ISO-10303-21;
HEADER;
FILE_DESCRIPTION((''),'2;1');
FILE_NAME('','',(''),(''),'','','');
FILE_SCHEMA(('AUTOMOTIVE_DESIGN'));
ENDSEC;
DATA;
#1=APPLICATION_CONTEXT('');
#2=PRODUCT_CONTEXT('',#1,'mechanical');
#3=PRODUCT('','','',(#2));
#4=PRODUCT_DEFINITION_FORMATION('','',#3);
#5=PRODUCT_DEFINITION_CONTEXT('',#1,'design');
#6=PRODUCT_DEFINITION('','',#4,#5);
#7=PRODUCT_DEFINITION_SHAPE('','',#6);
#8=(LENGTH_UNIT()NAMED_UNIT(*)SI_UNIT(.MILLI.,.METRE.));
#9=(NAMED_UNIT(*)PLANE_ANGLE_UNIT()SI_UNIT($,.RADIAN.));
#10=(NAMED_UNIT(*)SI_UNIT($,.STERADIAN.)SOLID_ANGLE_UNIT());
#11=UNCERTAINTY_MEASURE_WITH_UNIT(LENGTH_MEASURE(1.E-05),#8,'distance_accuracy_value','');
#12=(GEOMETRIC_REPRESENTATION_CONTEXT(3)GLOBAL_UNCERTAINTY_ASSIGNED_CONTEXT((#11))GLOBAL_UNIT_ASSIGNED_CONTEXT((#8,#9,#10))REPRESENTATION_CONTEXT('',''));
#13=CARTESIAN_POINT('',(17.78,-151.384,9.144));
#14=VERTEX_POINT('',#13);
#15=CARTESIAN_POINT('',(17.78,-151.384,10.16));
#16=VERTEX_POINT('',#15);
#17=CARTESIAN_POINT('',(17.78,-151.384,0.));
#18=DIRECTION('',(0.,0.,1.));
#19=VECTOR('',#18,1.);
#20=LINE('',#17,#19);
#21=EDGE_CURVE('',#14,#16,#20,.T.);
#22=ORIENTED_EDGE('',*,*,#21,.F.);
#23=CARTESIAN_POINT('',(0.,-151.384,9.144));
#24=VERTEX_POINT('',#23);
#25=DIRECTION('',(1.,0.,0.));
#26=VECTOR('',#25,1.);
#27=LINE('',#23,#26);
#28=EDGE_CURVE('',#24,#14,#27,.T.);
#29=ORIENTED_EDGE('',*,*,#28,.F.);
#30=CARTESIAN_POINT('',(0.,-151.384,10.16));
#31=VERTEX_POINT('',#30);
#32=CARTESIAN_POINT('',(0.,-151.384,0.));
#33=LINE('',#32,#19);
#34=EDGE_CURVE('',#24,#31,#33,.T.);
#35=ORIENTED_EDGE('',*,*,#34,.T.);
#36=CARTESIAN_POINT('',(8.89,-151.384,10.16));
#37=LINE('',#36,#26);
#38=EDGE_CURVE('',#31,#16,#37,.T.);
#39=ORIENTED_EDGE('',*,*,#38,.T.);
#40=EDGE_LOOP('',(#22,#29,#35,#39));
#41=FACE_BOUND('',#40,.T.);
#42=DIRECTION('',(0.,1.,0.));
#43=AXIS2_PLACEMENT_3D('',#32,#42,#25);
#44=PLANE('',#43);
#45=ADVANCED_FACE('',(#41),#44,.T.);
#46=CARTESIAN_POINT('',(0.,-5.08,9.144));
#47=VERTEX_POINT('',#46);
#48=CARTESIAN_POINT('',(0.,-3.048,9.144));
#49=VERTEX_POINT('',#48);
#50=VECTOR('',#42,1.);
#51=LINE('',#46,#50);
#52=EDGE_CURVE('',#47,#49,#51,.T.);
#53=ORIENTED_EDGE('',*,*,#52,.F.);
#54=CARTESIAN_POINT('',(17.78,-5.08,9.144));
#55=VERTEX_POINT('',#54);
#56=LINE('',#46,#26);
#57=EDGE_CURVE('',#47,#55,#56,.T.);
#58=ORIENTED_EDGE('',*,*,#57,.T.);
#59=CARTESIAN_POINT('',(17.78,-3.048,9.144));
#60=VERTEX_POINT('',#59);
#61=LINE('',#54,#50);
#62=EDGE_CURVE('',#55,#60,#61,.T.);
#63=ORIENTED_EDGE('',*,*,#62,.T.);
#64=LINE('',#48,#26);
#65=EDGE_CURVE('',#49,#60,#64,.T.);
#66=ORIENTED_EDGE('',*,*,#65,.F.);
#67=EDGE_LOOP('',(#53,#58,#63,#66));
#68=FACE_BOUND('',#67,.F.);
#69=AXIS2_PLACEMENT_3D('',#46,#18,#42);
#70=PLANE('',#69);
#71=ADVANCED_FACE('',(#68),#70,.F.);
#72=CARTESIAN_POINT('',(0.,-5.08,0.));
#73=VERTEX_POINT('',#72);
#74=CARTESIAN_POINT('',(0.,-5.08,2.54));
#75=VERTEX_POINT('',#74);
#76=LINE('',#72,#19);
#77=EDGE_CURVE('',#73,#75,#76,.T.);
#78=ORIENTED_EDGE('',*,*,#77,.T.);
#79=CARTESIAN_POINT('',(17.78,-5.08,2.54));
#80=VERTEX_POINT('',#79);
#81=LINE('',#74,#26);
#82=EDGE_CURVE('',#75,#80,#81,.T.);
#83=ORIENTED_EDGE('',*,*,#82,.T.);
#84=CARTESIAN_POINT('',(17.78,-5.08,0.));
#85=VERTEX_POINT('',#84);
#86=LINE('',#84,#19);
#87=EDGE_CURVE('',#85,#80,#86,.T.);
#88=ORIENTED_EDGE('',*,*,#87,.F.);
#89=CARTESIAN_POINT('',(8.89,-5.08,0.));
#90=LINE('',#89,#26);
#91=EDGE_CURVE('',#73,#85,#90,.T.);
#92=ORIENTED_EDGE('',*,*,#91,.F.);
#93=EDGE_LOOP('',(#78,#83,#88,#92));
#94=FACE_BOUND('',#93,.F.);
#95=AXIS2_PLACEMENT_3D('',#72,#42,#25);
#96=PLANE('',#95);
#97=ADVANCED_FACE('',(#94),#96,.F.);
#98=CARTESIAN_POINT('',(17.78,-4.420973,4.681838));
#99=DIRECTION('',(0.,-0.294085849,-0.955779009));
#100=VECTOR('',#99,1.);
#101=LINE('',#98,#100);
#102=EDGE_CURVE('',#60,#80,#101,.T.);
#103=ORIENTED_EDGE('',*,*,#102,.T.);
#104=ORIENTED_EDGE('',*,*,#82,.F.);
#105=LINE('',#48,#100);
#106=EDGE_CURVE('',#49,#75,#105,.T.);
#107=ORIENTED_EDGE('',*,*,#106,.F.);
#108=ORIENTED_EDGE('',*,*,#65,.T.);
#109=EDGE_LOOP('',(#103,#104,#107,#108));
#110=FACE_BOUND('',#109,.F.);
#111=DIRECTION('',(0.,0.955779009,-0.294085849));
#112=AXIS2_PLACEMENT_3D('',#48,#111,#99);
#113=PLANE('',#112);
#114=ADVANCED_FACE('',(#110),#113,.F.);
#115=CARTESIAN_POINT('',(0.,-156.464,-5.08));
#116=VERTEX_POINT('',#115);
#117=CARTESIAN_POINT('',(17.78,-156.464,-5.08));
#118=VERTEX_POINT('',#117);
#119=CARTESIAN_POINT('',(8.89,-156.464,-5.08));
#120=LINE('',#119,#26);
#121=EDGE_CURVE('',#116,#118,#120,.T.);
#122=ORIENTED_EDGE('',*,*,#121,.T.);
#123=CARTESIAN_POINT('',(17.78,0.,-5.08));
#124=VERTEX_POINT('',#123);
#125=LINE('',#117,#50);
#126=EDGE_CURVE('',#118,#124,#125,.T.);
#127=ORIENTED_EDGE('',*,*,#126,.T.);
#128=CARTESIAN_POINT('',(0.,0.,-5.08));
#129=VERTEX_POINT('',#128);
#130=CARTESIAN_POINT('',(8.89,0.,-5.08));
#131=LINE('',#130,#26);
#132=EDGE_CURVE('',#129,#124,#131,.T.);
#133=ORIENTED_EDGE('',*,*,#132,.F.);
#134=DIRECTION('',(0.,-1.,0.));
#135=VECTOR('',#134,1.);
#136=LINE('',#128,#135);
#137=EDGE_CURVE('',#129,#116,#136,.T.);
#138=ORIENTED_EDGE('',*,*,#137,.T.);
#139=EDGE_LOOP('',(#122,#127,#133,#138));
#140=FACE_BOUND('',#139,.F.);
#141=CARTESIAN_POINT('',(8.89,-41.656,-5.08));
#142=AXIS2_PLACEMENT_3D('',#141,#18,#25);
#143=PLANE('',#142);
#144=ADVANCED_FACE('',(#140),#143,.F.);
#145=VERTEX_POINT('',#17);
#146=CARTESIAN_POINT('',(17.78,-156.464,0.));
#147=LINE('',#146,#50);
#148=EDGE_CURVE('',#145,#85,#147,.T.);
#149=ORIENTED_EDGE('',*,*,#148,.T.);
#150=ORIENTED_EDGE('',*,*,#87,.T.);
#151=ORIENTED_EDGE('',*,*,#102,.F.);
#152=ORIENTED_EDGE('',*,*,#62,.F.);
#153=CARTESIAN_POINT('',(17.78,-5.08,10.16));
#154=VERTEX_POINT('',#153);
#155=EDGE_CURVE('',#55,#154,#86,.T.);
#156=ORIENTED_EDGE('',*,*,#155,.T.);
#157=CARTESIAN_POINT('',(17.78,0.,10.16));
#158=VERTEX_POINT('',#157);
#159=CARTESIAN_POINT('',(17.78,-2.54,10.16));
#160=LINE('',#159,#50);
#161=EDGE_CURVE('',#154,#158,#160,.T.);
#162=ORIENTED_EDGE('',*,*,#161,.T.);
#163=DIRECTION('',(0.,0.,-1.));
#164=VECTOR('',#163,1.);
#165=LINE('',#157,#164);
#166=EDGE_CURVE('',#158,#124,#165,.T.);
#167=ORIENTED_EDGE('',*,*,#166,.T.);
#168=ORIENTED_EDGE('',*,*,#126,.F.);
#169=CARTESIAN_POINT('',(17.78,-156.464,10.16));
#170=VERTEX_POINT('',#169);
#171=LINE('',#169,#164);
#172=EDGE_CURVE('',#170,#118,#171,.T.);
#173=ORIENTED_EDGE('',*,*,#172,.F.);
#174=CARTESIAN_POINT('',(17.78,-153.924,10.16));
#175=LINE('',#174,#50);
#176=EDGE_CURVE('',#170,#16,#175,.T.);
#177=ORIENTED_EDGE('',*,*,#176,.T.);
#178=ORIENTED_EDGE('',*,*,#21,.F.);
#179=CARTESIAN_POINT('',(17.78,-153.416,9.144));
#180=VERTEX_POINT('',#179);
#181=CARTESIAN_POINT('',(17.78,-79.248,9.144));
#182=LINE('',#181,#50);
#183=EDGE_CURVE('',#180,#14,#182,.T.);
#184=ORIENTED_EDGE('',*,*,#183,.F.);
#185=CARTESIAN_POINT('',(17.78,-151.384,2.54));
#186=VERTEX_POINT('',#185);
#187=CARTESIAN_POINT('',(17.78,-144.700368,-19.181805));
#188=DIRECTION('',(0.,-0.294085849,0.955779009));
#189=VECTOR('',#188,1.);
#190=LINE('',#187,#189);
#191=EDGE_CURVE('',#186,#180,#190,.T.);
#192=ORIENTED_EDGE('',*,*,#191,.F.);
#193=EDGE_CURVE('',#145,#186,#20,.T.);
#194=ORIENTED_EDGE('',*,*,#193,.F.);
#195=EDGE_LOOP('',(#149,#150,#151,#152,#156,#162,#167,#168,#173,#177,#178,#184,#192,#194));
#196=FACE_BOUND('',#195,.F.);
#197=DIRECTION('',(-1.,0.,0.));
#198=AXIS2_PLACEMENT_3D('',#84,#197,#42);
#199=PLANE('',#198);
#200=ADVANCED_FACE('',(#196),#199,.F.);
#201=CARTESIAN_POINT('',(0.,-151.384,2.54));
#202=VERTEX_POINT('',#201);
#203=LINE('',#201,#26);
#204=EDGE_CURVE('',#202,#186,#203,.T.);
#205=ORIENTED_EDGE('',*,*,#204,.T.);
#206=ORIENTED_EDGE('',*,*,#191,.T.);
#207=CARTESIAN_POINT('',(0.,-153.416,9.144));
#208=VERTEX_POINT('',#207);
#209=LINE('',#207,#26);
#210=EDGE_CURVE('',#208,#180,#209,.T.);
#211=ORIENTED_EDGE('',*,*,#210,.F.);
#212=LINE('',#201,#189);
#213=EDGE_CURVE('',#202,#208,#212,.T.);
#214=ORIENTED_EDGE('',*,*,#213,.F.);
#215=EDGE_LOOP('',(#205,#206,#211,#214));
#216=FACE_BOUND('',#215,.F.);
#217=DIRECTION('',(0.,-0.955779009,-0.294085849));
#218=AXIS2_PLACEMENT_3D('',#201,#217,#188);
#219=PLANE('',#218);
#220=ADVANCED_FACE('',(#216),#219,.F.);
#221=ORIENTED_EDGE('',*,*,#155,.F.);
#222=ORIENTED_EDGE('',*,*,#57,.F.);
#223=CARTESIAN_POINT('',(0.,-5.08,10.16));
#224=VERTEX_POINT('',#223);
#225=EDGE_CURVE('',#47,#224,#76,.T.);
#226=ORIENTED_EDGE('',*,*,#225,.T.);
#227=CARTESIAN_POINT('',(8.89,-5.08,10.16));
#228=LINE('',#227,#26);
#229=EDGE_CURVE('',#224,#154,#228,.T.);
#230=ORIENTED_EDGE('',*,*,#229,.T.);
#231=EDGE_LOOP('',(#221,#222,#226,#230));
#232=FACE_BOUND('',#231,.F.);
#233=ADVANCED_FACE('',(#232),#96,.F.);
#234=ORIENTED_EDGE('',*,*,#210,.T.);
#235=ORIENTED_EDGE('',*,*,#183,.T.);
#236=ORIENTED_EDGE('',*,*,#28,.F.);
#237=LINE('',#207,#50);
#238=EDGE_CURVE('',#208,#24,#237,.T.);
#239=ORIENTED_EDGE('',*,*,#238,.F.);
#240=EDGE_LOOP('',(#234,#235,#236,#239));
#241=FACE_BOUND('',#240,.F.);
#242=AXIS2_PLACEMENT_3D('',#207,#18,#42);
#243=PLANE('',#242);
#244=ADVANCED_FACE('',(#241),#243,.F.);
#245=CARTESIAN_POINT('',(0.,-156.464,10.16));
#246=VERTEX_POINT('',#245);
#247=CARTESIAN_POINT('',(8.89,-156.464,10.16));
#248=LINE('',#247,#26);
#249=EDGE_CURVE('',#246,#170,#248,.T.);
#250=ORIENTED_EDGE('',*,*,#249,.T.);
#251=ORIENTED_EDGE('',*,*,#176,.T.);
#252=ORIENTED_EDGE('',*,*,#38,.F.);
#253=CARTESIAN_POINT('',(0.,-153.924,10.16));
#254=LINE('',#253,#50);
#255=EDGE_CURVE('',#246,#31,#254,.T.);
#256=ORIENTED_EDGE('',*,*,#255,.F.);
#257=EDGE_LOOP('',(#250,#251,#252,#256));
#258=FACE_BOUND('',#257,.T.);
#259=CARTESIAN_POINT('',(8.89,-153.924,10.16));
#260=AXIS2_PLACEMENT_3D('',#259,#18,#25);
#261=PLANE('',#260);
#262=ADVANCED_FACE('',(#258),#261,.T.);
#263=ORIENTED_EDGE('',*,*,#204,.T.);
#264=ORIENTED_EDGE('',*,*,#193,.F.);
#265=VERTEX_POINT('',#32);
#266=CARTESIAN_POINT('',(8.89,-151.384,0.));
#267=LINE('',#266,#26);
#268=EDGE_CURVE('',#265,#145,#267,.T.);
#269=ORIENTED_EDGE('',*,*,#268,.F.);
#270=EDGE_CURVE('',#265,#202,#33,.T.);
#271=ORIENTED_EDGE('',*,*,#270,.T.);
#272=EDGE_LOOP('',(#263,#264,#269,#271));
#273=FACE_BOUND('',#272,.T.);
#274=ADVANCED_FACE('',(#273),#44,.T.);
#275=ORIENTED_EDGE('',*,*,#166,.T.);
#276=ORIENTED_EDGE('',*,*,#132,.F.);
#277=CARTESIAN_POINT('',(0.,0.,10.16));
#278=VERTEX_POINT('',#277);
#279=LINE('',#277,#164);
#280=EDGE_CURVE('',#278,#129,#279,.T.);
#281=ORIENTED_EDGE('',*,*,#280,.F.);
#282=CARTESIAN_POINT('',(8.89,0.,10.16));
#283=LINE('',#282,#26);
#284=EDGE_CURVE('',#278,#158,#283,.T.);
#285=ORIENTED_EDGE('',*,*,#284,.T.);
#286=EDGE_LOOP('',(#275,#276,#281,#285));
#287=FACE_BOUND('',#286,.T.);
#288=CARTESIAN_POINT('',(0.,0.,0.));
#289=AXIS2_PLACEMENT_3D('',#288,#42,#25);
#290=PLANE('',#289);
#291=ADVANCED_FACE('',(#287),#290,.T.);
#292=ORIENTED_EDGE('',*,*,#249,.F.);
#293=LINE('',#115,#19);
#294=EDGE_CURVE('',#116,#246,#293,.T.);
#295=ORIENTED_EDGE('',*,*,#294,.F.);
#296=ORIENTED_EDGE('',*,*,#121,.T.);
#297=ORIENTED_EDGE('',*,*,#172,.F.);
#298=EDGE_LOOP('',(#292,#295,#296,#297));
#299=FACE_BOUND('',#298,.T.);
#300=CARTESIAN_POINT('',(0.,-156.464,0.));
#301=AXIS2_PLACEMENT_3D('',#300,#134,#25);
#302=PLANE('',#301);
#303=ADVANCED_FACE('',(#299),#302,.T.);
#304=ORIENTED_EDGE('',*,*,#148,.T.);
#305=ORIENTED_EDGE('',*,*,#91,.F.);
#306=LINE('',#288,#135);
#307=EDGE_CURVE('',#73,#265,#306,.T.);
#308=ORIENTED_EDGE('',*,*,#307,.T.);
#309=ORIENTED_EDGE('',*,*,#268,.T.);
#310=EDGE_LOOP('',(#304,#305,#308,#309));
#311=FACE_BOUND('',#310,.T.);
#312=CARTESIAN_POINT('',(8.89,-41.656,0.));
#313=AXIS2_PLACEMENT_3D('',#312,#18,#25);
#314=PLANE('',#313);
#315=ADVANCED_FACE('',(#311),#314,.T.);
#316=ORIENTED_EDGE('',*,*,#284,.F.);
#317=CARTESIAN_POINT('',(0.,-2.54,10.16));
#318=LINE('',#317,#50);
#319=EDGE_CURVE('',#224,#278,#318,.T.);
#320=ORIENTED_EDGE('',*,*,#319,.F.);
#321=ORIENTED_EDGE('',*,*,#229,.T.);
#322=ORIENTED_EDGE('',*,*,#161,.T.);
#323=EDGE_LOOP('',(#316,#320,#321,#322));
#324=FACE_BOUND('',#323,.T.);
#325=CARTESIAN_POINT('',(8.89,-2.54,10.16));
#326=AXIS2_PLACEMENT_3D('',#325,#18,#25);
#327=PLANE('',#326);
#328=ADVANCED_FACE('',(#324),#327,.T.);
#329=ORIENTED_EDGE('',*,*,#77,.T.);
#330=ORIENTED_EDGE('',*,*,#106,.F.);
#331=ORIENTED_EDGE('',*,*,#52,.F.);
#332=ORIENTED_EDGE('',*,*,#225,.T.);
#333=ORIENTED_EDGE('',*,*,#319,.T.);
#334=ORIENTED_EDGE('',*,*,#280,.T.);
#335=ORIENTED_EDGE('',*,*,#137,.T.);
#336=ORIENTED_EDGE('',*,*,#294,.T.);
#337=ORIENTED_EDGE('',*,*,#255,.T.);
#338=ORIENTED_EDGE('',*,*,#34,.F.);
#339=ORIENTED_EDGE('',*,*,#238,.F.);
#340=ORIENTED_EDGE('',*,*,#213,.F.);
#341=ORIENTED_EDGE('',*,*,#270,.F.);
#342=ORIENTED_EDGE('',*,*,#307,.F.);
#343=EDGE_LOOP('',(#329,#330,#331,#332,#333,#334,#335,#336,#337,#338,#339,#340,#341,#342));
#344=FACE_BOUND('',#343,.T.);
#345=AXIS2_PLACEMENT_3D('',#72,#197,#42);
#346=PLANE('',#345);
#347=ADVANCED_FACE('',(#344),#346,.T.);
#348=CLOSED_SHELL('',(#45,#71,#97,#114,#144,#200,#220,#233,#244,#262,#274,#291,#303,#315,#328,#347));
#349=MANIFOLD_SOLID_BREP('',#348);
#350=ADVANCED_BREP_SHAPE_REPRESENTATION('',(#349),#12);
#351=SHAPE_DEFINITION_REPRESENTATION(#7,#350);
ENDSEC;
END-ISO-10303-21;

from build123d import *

# Parameters (mm, degrees)
F0_W     = 17.78
F0_H     = 73.152
F0_H_2   = 5.08
F1_DEPTH = 5.08
F2_DEPTH = 10.16
F4_DEPTH = 25.4


# Not quite as in the source:
# - a feature names something its author has since deleted; it is built from what else it names


with BuildPart() as f1:
    # F0 (on Top) → F1 (new body)
    with BuildSketch(Plane.XY):
        with Locations((8.89, -41.656)):
            Rectangle(F0_W, F0_H)
        with Locations((8.89, -2.54)):
            Rectangle(F0_W, F0_H_2)
        with Locations((8.89, -114.808)):
            Rectangle(F0_W, F0_H)
        with Locations((8.89, -153.924)):
            Rectangle(F0_W, F0_H_2)
    extrude(amount=-F1_DEPTH)

    # F0 (on Top) → F2 (join)
    with BuildSketch(Plane.XY):
        with Locations((8.89, -2.54)):
            Rectangle(F0_W, F0_H_2)
        with Locations((8.89, -153.924)):
            Rectangle(F0_W, F0_H_2)
    extrude(amount=F2_DEPTH)

    # F3 (on face) → F4 (cut)
    with BuildSketch(Plane(origin=(0, 0, 0), x_dir=(0, -1, 0), z_dir=(-1, 0, 0))):
        Polygon((3.048, 9.144), (5.08, 2.54), (5.08, 9.144), align=None)
        Polygon((151.384, 9.144), (151.384, 2.54), (153.416, 9.144), align=None)
    extrude(amount=-F4_DEPTH, mode=Mode.SUBTRACT)


solid = f1.part
